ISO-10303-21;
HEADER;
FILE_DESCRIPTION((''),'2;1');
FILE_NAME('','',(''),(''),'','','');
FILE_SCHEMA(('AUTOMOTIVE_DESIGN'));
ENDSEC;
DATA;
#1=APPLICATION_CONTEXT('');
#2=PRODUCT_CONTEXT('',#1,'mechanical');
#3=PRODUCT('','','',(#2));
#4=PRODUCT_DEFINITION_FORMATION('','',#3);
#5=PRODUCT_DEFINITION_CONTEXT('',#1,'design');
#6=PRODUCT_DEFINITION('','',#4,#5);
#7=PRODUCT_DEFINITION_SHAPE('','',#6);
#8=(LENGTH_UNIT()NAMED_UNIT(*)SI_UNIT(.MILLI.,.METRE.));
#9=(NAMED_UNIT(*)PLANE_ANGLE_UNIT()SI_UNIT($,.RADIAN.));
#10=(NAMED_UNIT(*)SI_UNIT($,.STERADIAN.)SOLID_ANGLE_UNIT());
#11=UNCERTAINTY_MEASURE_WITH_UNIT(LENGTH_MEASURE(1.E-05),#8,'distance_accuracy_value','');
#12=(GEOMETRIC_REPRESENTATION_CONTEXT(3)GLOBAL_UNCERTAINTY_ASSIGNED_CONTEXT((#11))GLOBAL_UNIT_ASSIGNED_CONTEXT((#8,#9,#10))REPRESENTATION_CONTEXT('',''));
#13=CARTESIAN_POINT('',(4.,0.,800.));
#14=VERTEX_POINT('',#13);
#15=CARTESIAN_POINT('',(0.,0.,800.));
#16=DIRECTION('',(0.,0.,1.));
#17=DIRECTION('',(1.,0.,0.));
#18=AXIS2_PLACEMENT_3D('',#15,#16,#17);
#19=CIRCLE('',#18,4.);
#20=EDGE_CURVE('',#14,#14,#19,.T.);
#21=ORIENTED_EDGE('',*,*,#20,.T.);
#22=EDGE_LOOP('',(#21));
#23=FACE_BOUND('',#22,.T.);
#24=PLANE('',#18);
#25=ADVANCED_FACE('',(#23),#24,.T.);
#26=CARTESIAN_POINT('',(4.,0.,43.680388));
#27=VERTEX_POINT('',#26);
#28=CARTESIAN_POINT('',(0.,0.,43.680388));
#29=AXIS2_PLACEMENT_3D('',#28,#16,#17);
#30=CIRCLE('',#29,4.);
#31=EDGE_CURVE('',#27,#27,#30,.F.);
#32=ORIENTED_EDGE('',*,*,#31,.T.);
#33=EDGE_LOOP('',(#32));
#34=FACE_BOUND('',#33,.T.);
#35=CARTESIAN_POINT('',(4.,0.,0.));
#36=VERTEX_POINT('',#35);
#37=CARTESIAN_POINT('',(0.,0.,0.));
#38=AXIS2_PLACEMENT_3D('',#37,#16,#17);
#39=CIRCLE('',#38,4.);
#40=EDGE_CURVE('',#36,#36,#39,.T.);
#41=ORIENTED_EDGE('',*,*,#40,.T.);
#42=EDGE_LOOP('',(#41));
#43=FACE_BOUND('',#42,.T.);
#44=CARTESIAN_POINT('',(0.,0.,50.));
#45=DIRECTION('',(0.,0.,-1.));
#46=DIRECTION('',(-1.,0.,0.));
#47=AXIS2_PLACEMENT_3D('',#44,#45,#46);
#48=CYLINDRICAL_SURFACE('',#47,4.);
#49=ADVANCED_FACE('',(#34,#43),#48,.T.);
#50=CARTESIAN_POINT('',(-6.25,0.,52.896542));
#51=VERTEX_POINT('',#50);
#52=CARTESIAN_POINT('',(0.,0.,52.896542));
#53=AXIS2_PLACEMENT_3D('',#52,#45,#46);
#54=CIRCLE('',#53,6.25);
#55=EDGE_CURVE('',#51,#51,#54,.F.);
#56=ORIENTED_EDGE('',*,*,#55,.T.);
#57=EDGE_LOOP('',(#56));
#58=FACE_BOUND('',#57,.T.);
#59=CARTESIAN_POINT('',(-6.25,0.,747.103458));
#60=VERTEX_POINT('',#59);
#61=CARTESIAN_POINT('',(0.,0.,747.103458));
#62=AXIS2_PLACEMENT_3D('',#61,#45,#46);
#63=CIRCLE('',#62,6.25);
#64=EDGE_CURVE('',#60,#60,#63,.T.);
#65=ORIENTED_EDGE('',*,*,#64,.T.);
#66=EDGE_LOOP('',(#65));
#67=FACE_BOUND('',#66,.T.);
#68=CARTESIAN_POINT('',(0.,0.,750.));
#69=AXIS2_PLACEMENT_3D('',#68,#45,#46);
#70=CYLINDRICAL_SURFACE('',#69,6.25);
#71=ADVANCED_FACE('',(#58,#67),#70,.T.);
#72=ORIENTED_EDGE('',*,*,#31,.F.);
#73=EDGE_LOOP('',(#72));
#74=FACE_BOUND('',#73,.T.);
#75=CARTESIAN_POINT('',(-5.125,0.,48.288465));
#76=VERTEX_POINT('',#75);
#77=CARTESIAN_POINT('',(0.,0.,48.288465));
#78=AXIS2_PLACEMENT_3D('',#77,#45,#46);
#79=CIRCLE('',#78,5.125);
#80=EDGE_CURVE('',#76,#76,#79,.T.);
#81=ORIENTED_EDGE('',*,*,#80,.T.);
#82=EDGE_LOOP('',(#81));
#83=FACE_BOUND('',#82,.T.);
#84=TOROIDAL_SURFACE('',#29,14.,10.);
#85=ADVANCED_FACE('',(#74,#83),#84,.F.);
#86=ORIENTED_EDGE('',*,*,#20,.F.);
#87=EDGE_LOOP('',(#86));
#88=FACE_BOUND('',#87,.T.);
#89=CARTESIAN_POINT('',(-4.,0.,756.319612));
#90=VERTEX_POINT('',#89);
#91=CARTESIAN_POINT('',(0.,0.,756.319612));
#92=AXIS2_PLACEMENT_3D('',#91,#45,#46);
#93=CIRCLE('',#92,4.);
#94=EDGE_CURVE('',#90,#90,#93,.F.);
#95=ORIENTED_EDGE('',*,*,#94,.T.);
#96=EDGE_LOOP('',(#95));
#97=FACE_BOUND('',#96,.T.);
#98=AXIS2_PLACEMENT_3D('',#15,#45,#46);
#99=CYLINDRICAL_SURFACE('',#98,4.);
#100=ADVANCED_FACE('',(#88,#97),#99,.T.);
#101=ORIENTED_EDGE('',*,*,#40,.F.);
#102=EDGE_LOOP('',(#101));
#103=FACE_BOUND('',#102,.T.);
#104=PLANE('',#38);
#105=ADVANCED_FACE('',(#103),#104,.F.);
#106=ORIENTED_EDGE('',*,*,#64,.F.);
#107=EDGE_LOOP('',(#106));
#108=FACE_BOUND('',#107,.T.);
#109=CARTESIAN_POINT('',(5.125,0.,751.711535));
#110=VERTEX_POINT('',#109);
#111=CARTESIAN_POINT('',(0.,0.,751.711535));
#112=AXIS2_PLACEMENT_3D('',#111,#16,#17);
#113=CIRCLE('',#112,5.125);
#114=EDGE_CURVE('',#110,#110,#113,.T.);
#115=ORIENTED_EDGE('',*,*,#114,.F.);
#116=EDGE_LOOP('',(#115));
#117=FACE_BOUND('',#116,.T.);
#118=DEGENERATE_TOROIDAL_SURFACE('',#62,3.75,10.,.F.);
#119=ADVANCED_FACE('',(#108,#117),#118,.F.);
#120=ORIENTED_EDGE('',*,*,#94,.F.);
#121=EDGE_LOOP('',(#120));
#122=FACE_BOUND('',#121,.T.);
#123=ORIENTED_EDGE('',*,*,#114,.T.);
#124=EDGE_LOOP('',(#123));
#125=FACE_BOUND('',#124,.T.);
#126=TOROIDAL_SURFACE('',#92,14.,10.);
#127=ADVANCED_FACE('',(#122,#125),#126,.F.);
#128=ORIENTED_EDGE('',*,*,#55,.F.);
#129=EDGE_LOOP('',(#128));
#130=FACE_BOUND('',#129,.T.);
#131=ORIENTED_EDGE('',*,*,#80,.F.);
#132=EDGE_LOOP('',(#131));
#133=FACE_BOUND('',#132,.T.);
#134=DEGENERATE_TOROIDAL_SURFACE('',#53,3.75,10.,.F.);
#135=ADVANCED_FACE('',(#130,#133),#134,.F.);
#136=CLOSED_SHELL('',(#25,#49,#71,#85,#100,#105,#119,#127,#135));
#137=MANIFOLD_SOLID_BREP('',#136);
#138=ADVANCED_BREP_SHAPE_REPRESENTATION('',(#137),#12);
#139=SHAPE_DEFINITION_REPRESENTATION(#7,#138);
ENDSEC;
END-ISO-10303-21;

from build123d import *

# Parameters (mm, degrees)
SKETCH1_R           = 4
BOSS_EXTRUDE1_DEPTH = 50
SKETCH2_R           = 6.25
BOSS_EXTRUDE2_DEPTH = 700
SKETCH3_R           = 4
BOSS_EXTRUDE3_DEPTH = 50
FILLET1_R           = 10
FILLET2_R           = 10


with BuildPart() as part:
    # Sketch1 → Boss-Extrude1 (new body)
    with BuildSketch(Plane.XY):
        Circle(SKETCH1_R)
    extrude(amount=BOSS_EXTRUDE1_DEPTH)

    # Sketch2 → Boss-Extrude2 (add)
    with BuildSketch(Plane.XY.offset(50)):
        Circle(SKETCH2_R)
    extrude(amount=BOSS_EXTRUDE2_DEPTH)

    # Sketch3 → Boss-Extrude3 (add)
    with BuildSketch(Plane.XY.offset(750)):
        Circle(SKETCH3_R)
    extrude(amount=BOSS_EXTRUDE3_DEPTH)

    # Fillet1
    # the kernel refuses this fillet: 10 mm, written as the material it adds along each edge
    with BuildSketch(Plane(origin=(0, 0, 750), x_dir=(1, 0, 0), z_dir=(0, -1, 0))) as fillet1_piece_1:
        with BuildLine():
            CenterArc((14, 6.31961233), FILLET1_R, 180, 39.194967426)
            Line((4, 6.31961233), (3.8, 6.31961233))
            Line((3.8, 6.31961233), (3.8, 0))
            Line((3.8, 0), (4, -0.2))
            ThreePointArc((4, -0.2), (5.125, -0.2), (6.095, -0.126392247))
            Line((6.095, -0.126392247), (6.25, 0))
        make_face()
    revolve(axis=Axis((0, 0, 750), (0, 0, 1)))
    with BuildSketch(Plane(origin=(0, 0, 50), x_dir=(1, 0, 0), z_dir=(0, -1, 0))) as fillet1_piece_2:
        with BuildLine():
            CenterArc((14, -6.31961233), FILLET1_R, 140.805032574, 39.194967426)
            Line((4, -6.31961233), (3.8, -6.31961233))
            Line((3.8, -6.31961233), (3.8, 0))
            Line((3.8, 0), (4, 0.2))
            ThreePointArc((4, 0.2), (5.125, 0.2), (6.095, 0.126392247))
            Line((6.095, 0.126392247), (6.25, 0))
        make_face()
    revolve(axis=Axis((0, 0, 50), (0, 0, 1)))

    # Fillet2
    fillet2_edges = [part.edges().sort_by_distance(p)[0] for p in [
        (-6.25, 0, 50),
        (-6.25, 0, 750),
    ]]
    fillet(fillet2_edges, radius=FILLET2_R)


solid = part.part
